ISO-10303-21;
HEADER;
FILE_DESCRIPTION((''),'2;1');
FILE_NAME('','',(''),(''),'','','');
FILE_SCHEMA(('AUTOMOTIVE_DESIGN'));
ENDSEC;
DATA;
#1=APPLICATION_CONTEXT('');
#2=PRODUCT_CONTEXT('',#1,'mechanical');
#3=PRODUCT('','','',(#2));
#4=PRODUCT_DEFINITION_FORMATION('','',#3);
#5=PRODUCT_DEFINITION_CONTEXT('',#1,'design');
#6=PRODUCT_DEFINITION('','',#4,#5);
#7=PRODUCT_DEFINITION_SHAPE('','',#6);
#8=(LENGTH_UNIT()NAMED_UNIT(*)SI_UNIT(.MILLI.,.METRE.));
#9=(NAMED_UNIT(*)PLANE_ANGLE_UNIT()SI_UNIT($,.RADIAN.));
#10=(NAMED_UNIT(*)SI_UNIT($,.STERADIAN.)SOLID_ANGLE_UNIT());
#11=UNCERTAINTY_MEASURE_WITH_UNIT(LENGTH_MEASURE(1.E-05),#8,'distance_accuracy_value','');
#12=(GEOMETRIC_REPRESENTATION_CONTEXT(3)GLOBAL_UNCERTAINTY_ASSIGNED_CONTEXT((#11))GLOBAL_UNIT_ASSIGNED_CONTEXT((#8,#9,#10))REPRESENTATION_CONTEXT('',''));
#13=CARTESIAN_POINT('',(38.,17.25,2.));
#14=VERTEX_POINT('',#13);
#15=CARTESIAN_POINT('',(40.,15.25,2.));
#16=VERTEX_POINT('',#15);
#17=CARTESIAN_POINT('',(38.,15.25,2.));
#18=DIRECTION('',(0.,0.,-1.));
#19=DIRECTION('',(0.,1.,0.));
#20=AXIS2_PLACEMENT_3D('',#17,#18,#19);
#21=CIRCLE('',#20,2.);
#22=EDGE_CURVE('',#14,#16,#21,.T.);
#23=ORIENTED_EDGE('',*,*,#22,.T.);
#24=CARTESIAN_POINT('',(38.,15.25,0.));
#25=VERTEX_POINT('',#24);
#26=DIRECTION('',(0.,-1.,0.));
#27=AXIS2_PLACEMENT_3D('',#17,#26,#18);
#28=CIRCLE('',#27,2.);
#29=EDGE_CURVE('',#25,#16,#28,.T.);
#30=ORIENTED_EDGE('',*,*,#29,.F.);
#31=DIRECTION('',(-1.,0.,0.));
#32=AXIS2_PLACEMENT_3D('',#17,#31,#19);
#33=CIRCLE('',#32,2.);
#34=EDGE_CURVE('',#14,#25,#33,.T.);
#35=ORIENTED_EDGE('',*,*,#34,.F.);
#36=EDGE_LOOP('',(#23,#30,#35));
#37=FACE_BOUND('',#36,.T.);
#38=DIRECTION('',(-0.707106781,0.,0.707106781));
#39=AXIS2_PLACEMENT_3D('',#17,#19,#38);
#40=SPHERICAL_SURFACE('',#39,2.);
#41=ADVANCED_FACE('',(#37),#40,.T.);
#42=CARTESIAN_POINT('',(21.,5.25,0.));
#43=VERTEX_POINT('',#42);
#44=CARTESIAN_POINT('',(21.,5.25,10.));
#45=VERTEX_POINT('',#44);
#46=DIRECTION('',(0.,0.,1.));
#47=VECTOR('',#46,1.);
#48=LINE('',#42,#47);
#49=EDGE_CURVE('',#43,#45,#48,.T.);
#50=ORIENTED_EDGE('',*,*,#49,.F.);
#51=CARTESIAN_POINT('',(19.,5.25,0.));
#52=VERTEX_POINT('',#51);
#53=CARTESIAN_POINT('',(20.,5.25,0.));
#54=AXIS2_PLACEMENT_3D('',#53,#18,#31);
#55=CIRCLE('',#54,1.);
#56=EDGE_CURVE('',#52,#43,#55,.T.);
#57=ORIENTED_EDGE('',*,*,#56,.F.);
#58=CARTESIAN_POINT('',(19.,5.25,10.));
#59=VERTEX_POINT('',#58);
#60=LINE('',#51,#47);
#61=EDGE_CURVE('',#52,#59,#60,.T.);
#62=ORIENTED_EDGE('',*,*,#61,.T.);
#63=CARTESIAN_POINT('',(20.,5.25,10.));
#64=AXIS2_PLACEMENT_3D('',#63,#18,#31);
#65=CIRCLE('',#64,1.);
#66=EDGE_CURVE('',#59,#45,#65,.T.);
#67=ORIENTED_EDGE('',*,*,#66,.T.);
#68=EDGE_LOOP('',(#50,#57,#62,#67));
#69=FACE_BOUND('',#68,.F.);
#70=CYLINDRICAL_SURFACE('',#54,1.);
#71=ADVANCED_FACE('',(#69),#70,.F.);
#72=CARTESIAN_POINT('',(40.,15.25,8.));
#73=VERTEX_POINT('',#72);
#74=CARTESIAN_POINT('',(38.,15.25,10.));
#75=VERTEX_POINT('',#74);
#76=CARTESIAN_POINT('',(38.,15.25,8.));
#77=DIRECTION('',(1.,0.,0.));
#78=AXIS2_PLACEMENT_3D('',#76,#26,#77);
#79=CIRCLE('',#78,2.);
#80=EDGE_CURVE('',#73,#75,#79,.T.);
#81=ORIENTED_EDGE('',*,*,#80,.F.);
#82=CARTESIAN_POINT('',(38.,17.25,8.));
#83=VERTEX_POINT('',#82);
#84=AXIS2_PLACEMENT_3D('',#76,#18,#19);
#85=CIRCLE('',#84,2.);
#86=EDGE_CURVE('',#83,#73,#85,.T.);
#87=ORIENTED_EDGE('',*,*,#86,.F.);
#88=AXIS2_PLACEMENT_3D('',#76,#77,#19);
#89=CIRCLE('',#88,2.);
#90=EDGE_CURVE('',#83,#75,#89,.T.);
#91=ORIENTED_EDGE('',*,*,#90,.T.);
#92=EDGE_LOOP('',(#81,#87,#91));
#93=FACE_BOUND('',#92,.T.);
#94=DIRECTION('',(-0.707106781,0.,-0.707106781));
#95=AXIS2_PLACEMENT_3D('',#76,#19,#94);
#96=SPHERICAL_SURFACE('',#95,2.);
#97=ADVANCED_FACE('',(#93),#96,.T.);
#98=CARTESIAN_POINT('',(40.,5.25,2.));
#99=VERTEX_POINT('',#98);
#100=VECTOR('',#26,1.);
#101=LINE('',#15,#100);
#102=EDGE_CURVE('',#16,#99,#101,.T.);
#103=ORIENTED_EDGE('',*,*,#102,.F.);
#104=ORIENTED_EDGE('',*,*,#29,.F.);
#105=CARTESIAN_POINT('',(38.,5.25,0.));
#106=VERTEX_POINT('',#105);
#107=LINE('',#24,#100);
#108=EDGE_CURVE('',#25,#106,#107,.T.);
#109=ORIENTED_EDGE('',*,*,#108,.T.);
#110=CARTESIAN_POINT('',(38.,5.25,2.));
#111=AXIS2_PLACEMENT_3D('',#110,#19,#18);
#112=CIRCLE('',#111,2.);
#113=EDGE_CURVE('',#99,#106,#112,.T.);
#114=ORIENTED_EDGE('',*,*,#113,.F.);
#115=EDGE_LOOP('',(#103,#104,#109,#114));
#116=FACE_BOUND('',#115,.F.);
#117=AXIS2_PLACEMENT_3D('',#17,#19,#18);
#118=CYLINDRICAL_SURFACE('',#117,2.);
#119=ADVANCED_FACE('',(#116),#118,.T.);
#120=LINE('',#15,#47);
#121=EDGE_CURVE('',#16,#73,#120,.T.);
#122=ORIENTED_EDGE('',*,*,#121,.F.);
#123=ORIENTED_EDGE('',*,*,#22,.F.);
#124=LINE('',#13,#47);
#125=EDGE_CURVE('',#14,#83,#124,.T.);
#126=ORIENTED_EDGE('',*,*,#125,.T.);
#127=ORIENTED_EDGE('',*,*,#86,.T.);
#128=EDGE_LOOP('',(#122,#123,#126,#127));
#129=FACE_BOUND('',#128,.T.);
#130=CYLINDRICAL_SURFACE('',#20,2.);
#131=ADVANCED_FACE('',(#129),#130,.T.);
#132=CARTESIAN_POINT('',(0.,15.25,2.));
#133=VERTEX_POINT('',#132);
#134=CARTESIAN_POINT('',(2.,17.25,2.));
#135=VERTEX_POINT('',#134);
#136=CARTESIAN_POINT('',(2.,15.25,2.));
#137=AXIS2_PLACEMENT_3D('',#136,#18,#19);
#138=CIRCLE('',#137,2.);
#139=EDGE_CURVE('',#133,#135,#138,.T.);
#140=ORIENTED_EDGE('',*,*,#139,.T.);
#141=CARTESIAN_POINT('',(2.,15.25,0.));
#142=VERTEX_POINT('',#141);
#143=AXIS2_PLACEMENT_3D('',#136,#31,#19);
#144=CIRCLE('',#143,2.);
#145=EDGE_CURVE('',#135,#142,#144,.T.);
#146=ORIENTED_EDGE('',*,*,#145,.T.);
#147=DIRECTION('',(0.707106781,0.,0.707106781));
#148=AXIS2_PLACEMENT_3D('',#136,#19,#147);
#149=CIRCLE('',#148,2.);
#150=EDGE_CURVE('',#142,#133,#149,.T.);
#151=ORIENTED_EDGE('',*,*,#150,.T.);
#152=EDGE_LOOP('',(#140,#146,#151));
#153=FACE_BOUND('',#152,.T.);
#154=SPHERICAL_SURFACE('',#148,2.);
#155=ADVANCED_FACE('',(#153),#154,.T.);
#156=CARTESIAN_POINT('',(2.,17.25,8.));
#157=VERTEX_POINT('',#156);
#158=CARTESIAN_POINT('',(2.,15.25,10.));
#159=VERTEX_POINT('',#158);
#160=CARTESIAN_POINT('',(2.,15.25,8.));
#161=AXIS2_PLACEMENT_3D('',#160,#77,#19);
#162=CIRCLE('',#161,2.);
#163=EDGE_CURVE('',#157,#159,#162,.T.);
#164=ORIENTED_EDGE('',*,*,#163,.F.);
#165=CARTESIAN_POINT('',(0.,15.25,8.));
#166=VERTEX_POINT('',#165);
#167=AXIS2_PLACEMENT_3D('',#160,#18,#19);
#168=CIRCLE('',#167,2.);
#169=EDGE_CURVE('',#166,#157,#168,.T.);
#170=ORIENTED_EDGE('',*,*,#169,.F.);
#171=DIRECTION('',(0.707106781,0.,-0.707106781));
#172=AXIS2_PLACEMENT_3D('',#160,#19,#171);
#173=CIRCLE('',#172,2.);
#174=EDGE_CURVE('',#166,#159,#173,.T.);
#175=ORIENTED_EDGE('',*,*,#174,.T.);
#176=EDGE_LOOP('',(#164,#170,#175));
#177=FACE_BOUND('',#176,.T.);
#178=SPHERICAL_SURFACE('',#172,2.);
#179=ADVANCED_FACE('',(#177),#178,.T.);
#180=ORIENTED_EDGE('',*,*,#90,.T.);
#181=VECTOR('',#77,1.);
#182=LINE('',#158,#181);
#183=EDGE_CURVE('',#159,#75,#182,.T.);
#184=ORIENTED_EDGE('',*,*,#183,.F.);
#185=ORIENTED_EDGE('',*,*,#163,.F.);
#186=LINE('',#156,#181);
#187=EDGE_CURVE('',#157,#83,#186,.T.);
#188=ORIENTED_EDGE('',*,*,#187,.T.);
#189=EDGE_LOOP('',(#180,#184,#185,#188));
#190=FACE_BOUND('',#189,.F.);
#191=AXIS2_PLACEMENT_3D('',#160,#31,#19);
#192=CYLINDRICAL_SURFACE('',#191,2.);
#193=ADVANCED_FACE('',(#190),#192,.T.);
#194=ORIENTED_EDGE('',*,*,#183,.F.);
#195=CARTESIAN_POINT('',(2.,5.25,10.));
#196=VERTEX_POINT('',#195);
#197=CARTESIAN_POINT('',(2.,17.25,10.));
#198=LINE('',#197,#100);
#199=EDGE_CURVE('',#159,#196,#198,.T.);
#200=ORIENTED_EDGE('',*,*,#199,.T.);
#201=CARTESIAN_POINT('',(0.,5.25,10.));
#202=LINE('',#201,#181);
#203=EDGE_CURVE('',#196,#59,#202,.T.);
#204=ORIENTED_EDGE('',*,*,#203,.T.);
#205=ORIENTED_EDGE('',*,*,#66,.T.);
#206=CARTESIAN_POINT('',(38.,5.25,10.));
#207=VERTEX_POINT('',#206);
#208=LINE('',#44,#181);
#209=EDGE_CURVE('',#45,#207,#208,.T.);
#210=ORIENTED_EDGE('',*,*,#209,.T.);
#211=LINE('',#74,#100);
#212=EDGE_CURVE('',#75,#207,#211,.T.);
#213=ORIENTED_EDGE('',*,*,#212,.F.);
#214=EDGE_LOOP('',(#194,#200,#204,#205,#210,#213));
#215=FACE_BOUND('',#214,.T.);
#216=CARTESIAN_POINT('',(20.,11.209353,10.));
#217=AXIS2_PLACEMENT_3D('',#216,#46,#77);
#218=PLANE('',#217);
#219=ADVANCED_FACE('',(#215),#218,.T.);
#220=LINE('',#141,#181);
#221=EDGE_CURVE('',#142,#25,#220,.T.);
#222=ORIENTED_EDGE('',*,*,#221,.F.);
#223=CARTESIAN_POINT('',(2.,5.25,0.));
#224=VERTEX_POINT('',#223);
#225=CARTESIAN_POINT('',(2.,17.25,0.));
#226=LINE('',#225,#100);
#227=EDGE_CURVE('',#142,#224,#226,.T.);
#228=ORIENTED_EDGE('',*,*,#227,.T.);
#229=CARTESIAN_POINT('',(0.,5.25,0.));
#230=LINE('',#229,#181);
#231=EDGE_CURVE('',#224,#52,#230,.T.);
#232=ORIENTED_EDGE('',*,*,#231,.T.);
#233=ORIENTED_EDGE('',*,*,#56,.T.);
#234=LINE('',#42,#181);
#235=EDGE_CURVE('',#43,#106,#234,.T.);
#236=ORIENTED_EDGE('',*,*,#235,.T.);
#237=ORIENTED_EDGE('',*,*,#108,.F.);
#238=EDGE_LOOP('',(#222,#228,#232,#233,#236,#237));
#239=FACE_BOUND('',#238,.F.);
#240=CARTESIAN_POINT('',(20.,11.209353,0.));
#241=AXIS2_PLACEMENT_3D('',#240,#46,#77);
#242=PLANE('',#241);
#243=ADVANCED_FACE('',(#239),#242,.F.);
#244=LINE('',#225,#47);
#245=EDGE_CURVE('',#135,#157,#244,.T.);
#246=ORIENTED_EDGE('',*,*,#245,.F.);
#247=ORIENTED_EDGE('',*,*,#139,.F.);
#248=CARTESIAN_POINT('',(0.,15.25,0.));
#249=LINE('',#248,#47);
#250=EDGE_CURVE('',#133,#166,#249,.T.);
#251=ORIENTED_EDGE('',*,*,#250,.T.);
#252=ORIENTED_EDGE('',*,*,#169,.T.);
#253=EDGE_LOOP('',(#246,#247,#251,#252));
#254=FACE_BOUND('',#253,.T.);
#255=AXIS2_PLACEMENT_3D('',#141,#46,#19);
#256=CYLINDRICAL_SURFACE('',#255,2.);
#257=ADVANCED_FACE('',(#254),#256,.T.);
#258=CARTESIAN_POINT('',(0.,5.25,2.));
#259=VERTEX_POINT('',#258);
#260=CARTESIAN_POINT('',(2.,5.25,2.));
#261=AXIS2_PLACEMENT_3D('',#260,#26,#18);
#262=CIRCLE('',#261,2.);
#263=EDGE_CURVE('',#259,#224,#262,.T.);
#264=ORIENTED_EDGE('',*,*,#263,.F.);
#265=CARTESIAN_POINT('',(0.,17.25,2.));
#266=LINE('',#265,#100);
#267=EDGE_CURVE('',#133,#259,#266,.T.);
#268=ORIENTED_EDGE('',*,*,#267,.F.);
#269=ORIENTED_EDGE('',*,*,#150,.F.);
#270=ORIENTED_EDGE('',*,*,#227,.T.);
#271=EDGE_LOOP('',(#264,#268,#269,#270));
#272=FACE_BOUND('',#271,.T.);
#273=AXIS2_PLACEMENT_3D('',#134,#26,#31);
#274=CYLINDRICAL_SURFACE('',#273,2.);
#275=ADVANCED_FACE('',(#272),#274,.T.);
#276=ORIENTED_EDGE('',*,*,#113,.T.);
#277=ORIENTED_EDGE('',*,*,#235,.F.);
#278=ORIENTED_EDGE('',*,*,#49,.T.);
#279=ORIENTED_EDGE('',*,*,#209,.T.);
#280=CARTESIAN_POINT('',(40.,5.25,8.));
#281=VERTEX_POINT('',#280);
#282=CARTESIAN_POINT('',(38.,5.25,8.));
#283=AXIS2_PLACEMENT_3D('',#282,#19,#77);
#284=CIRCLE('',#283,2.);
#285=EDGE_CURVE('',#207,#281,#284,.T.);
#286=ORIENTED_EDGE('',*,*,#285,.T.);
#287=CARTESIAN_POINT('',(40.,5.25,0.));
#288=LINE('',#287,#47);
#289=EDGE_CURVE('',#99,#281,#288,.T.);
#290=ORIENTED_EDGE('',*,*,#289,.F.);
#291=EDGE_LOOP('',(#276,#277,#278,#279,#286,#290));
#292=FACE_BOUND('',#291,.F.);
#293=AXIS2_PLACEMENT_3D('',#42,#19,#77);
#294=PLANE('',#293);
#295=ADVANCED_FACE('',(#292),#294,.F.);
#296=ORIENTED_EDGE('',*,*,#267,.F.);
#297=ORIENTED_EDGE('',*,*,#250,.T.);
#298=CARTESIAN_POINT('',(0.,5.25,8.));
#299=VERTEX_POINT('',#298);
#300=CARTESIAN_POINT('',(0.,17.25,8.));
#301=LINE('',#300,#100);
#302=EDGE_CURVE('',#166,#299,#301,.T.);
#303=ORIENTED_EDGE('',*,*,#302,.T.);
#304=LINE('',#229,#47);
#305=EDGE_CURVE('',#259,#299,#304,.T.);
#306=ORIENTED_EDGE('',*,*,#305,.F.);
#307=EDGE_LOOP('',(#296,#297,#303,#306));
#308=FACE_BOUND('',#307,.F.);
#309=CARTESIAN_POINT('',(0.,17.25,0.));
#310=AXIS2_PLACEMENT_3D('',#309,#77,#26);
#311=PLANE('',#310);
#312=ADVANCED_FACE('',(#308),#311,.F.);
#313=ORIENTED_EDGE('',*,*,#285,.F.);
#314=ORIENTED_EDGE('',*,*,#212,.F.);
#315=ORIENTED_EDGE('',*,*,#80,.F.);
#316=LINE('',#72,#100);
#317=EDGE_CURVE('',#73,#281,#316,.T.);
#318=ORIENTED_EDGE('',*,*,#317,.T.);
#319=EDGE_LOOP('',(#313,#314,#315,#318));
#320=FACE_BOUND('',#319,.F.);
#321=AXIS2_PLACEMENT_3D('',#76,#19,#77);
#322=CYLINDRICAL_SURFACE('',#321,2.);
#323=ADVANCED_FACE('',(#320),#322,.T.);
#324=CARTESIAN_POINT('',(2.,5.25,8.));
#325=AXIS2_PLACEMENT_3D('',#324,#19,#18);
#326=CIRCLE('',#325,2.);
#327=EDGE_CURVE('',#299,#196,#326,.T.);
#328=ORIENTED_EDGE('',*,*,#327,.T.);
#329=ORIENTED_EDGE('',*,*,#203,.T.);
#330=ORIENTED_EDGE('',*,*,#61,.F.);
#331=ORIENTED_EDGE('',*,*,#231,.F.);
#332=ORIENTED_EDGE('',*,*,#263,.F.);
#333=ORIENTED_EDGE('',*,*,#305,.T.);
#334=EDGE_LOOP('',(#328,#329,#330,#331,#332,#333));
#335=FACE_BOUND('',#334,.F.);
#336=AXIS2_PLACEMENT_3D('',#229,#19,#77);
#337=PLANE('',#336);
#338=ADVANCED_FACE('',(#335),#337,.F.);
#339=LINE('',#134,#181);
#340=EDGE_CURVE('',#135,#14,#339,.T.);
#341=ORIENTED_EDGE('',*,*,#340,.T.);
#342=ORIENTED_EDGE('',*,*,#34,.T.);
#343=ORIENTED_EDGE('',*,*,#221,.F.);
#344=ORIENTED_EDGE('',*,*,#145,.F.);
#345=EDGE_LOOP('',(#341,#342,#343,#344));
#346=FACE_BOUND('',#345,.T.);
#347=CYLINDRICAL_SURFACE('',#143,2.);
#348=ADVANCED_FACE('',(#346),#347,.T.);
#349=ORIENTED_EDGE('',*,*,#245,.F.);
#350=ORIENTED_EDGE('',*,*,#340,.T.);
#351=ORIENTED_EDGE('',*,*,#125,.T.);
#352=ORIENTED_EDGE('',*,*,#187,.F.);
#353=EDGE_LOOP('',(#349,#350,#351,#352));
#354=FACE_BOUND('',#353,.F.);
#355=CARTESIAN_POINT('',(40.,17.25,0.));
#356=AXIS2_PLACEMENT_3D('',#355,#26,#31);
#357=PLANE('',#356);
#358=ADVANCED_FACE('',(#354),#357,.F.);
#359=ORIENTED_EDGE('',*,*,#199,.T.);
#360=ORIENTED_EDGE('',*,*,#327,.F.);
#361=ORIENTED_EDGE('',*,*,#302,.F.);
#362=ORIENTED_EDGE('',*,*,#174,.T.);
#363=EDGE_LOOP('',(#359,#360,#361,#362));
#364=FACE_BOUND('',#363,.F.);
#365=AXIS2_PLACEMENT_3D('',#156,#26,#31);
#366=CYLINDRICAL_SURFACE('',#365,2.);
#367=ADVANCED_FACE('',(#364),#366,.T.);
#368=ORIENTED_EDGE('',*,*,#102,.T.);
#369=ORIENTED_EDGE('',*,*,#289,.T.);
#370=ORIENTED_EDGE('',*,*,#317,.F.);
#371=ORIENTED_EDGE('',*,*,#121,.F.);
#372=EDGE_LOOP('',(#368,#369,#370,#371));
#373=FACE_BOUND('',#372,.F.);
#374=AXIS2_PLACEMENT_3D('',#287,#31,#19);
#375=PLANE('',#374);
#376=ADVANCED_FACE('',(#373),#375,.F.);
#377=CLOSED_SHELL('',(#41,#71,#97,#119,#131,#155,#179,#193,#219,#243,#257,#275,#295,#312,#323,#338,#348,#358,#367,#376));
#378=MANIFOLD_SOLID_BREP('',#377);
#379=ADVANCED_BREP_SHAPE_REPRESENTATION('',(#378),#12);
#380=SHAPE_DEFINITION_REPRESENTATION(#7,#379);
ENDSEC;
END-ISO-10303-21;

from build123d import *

# Parameters (mm, degrees)
F1_DEPTH     = 10
F2_R         = 2
F3_T1_DEPTH  = 15
F3_T3_DEPTH  = 6
F3_T5_DEPTH  = 36
F3_S9_W      = 2
F3_S9_H      = 2
F3_T10_DEPTH = 2
F3_S15_W     = 2
F3_S15_H     = 2
F3_T16_DEPTH = 2
F3_S21_W     = 2
F3_S21_H     = 2
F3_T22_DEPTH = 2
F3_S27_W     = 2
F3_S27_H     = 2
F3_T28_DEPTH = 2


# Not quite as in the source:
# - a fillet or chamfer that OpenCascade refuses, or shapes differently, is made with other operations: its cross-section is extruded or revolved along the edge and cut away or added


with BuildPart() as f1:
    # F0 (on Top) → F1 (new body)
    with BuildSketch(Plane.XY):
        with BuildLine():
            Line((40, 17.25), (0, 17.25))
            Line((0, 17.25), (0, 5.25))
            Line((0, 5.25), (19, 5.25))
            ThreePointArc((19, 5.25), (20, 6.25), (21, 5.25))
            Line((21, 5.25), (40, 5.25))
            Line((40, 5.25), (40, 17.25))
        make_face()
    extrude(amount=F1_DEPTH)

    # F2
    f2_edges = [f1.edges().sort_by_distance(p)[0] for p in [
        (0, 11.25, 0),
        (0, 11.25, 10),
        (0, 17.25, 5),
    ]]
    fillet(f2_edges, radius=F2_R)

    # F3: fillet of radius 2 on 5 edges, made by hand

    # F3_s2 → F3_t1 (cut)
    with BuildSketch(Plane.XZ.offset(-15.25)):
        with BuildLine():
            ThreePointArc((38, 0), (39.4142135624, 0.5857864376), (40, 2))
            Line((40, 2), (40, 0))
            Line((40, 0), (38, 0))
        make_face()
        with BuildLine():
            ThreePointArc((40, 8), (39.4142135624, 9.4142135624), (38, 10))
            Line((38, 10), (40, 10))
            Line((40, 10), (40, 8))
        make_face()
    extrude(amount=F3_T1_DEPTH, mode=Mode.SUBTRACT)

    # F3_s4 → F3_t3 (cut)
    with BuildSketch(Plane.XY.offset(2)):
        with BuildLine():
            ThreePointArc((38, 17.25), (39.4142135624, 16.6642135624), (40, 15.25))
            Line((40, 15.25), (40, 17.25))
            Line((40, 17.25), (38, 17.25))
        make_face()
    extrude(amount=F3_T3_DEPTH, mode=Mode.SUBTRACT)

    # F3_s6 → F3_t5 (cut)
    with BuildSketch(Plane.YZ.offset(2)):
        with BuildLine():
            ThreePointArc((17.25, 2), (16.6642135624, 0.5857864376), (15.25, 0))
            Line((15.25, 0), (17.25, 0))
            Line((17.25, 0), (17.25, 2))
        make_face()
        with BuildLine():
            ThreePointArc((17.25, 8), (16.6642135624, 9.4142135624), (15.25, 10))
            Line((15.25, 10), (17.25, 10))
            Line((17.25, 10), (17.25, 8))
        make_face()
    extrude(amount=F3_T5_DEPTH, mode=Mode.SUBTRACT)


with BuildPart() as f3_tool8:
    # F3_s9 → F3_t10 (new body)
    with BuildSketch(Plane.XZ.offset(-15.25)):
        with Locations((1, 9)):
            Rectangle(F3_S9_W, F3_S9_H)
    extrude(amount=-F3_T10_DEPTH)

    # F3_s11 → F3_t12 (revolve, cut)
    with BuildSketch(Plane(origin=(2, 15.25, 8), x_dir=(0.7071067812, 0, -0.7071067812), z_dir=(0.7071067812, 0, 0.7071067812))):
        with BuildLine():
            ThreePointArc((0, -2), (2, 0), (0, 2))
            Line((0, 2), (0, -2))
        make_face()
    revolve(axis=Axis((2, 15.25, 8), (0, 1, 0)), mode=Mode.SUBTRACT)


with BuildPart() as f1_1:
    add(f1.part)

    # F3_t7: cut F3_tool8
    add(f3_tool8.part, mode=Mode.SUBTRACT)


with BuildPart() as f3_tool14:
    # F3_s15 → F3_t16 (new body)
    with BuildSketch(Plane.XZ.offset(-15.25)):
        with Locations((1, 1)):
            Rectangle(F3_S15_W, F3_S15_H)
    extrude(amount=-F3_T16_DEPTH)

    # F3_s17 → F3_t18 (revolve, cut)
    with BuildSketch(Plane(origin=(2, 15.25, 2), x_dir=(0.7071067812, 0, 0.7071067812), z_dir=(-0.7071067812, 0, 0.7071067812))):
        with BuildLine():
            ThreePointArc((0, -2), (2, 0), (0, 2))
            Line((0, 2), (0, -2))
        make_face()
    revolve(axis=Axis((2, 15.25, 2), (0, 1, 0)), mode=Mode.SUBTRACT)


with BuildPart() as f1_2:
    add(f1_1.part)

    # F3_t13: cut F3_tool14
    add(f3_tool14.part, mode=Mode.SUBTRACT)


with BuildPart() as f3_tool20:
    # F3_s21 → F3_t22 (new body)
    with BuildSketch(Plane.XZ.offset(-15.25)):
        with Locations((39, 1)):
            Rectangle(F3_S21_W, F3_S21_H)
    extrude(amount=-F3_T22_DEPTH)

    # F3_s23 → F3_t24 (revolve, cut)
    with BuildSketch(Plane(origin=(38, 15.25, 2), x_dir=(-0.7071067812, 0, 0.7071067812), z_dir=(-0.7071067812, 0, -0.7071067812))):
        with BuildLine():
            ThreePointArc((0, -2), (2, 0), (0, 2))
            Line((0, 2), (0, -2))
        make_face()
    revolve(axis=Axis((38, 15.25, 2), (0, 1, 0)), mode=Mode.SUBTRACT)


with BuildPart() as f1_3:
    add(f1_2.part)

    # F3_t19: cut F3_tool20
    add(f3_tool20.part, mode=Mode.SUBTRACT)


with BuildPart() as f3_tool26:
    # F3_s27 → F3_t28 (new body)
    with BuildSketch(Plane.XZ.offset(-15.25)):
        with Locations((39, 9)):
            Rectangle(F3_S27_W, F3_S27_H)
    extrude(amount=-F3_T28_DEPTH)

    # F3_s29 → F3_t30 (revolve, cut)
    with BuildSketch(Plane(origin=(38, 15.25, 8), x_dir=(-0.7071067812, 0, -0.7071067812), z_dir=(0.7071067812, 0, -0.7071067812))):
        with BuildLine():
            ThreePointArc((0, -2), (2, 0), (0, 2))
            Line((0, 2), (0, -2))
        make_face()
    revolve(axis=Axis((38, 15.25, 8), (0, 1, 0)), mode=Mode.SUBTRACT)


with BuildPart() as f1_4:
    add(f1_3.part)

    # F3_t25: cut F3_tool26
    add(f3_tool26.part, mode=Mode.SUBTRACT)


solid = f1_4.part
